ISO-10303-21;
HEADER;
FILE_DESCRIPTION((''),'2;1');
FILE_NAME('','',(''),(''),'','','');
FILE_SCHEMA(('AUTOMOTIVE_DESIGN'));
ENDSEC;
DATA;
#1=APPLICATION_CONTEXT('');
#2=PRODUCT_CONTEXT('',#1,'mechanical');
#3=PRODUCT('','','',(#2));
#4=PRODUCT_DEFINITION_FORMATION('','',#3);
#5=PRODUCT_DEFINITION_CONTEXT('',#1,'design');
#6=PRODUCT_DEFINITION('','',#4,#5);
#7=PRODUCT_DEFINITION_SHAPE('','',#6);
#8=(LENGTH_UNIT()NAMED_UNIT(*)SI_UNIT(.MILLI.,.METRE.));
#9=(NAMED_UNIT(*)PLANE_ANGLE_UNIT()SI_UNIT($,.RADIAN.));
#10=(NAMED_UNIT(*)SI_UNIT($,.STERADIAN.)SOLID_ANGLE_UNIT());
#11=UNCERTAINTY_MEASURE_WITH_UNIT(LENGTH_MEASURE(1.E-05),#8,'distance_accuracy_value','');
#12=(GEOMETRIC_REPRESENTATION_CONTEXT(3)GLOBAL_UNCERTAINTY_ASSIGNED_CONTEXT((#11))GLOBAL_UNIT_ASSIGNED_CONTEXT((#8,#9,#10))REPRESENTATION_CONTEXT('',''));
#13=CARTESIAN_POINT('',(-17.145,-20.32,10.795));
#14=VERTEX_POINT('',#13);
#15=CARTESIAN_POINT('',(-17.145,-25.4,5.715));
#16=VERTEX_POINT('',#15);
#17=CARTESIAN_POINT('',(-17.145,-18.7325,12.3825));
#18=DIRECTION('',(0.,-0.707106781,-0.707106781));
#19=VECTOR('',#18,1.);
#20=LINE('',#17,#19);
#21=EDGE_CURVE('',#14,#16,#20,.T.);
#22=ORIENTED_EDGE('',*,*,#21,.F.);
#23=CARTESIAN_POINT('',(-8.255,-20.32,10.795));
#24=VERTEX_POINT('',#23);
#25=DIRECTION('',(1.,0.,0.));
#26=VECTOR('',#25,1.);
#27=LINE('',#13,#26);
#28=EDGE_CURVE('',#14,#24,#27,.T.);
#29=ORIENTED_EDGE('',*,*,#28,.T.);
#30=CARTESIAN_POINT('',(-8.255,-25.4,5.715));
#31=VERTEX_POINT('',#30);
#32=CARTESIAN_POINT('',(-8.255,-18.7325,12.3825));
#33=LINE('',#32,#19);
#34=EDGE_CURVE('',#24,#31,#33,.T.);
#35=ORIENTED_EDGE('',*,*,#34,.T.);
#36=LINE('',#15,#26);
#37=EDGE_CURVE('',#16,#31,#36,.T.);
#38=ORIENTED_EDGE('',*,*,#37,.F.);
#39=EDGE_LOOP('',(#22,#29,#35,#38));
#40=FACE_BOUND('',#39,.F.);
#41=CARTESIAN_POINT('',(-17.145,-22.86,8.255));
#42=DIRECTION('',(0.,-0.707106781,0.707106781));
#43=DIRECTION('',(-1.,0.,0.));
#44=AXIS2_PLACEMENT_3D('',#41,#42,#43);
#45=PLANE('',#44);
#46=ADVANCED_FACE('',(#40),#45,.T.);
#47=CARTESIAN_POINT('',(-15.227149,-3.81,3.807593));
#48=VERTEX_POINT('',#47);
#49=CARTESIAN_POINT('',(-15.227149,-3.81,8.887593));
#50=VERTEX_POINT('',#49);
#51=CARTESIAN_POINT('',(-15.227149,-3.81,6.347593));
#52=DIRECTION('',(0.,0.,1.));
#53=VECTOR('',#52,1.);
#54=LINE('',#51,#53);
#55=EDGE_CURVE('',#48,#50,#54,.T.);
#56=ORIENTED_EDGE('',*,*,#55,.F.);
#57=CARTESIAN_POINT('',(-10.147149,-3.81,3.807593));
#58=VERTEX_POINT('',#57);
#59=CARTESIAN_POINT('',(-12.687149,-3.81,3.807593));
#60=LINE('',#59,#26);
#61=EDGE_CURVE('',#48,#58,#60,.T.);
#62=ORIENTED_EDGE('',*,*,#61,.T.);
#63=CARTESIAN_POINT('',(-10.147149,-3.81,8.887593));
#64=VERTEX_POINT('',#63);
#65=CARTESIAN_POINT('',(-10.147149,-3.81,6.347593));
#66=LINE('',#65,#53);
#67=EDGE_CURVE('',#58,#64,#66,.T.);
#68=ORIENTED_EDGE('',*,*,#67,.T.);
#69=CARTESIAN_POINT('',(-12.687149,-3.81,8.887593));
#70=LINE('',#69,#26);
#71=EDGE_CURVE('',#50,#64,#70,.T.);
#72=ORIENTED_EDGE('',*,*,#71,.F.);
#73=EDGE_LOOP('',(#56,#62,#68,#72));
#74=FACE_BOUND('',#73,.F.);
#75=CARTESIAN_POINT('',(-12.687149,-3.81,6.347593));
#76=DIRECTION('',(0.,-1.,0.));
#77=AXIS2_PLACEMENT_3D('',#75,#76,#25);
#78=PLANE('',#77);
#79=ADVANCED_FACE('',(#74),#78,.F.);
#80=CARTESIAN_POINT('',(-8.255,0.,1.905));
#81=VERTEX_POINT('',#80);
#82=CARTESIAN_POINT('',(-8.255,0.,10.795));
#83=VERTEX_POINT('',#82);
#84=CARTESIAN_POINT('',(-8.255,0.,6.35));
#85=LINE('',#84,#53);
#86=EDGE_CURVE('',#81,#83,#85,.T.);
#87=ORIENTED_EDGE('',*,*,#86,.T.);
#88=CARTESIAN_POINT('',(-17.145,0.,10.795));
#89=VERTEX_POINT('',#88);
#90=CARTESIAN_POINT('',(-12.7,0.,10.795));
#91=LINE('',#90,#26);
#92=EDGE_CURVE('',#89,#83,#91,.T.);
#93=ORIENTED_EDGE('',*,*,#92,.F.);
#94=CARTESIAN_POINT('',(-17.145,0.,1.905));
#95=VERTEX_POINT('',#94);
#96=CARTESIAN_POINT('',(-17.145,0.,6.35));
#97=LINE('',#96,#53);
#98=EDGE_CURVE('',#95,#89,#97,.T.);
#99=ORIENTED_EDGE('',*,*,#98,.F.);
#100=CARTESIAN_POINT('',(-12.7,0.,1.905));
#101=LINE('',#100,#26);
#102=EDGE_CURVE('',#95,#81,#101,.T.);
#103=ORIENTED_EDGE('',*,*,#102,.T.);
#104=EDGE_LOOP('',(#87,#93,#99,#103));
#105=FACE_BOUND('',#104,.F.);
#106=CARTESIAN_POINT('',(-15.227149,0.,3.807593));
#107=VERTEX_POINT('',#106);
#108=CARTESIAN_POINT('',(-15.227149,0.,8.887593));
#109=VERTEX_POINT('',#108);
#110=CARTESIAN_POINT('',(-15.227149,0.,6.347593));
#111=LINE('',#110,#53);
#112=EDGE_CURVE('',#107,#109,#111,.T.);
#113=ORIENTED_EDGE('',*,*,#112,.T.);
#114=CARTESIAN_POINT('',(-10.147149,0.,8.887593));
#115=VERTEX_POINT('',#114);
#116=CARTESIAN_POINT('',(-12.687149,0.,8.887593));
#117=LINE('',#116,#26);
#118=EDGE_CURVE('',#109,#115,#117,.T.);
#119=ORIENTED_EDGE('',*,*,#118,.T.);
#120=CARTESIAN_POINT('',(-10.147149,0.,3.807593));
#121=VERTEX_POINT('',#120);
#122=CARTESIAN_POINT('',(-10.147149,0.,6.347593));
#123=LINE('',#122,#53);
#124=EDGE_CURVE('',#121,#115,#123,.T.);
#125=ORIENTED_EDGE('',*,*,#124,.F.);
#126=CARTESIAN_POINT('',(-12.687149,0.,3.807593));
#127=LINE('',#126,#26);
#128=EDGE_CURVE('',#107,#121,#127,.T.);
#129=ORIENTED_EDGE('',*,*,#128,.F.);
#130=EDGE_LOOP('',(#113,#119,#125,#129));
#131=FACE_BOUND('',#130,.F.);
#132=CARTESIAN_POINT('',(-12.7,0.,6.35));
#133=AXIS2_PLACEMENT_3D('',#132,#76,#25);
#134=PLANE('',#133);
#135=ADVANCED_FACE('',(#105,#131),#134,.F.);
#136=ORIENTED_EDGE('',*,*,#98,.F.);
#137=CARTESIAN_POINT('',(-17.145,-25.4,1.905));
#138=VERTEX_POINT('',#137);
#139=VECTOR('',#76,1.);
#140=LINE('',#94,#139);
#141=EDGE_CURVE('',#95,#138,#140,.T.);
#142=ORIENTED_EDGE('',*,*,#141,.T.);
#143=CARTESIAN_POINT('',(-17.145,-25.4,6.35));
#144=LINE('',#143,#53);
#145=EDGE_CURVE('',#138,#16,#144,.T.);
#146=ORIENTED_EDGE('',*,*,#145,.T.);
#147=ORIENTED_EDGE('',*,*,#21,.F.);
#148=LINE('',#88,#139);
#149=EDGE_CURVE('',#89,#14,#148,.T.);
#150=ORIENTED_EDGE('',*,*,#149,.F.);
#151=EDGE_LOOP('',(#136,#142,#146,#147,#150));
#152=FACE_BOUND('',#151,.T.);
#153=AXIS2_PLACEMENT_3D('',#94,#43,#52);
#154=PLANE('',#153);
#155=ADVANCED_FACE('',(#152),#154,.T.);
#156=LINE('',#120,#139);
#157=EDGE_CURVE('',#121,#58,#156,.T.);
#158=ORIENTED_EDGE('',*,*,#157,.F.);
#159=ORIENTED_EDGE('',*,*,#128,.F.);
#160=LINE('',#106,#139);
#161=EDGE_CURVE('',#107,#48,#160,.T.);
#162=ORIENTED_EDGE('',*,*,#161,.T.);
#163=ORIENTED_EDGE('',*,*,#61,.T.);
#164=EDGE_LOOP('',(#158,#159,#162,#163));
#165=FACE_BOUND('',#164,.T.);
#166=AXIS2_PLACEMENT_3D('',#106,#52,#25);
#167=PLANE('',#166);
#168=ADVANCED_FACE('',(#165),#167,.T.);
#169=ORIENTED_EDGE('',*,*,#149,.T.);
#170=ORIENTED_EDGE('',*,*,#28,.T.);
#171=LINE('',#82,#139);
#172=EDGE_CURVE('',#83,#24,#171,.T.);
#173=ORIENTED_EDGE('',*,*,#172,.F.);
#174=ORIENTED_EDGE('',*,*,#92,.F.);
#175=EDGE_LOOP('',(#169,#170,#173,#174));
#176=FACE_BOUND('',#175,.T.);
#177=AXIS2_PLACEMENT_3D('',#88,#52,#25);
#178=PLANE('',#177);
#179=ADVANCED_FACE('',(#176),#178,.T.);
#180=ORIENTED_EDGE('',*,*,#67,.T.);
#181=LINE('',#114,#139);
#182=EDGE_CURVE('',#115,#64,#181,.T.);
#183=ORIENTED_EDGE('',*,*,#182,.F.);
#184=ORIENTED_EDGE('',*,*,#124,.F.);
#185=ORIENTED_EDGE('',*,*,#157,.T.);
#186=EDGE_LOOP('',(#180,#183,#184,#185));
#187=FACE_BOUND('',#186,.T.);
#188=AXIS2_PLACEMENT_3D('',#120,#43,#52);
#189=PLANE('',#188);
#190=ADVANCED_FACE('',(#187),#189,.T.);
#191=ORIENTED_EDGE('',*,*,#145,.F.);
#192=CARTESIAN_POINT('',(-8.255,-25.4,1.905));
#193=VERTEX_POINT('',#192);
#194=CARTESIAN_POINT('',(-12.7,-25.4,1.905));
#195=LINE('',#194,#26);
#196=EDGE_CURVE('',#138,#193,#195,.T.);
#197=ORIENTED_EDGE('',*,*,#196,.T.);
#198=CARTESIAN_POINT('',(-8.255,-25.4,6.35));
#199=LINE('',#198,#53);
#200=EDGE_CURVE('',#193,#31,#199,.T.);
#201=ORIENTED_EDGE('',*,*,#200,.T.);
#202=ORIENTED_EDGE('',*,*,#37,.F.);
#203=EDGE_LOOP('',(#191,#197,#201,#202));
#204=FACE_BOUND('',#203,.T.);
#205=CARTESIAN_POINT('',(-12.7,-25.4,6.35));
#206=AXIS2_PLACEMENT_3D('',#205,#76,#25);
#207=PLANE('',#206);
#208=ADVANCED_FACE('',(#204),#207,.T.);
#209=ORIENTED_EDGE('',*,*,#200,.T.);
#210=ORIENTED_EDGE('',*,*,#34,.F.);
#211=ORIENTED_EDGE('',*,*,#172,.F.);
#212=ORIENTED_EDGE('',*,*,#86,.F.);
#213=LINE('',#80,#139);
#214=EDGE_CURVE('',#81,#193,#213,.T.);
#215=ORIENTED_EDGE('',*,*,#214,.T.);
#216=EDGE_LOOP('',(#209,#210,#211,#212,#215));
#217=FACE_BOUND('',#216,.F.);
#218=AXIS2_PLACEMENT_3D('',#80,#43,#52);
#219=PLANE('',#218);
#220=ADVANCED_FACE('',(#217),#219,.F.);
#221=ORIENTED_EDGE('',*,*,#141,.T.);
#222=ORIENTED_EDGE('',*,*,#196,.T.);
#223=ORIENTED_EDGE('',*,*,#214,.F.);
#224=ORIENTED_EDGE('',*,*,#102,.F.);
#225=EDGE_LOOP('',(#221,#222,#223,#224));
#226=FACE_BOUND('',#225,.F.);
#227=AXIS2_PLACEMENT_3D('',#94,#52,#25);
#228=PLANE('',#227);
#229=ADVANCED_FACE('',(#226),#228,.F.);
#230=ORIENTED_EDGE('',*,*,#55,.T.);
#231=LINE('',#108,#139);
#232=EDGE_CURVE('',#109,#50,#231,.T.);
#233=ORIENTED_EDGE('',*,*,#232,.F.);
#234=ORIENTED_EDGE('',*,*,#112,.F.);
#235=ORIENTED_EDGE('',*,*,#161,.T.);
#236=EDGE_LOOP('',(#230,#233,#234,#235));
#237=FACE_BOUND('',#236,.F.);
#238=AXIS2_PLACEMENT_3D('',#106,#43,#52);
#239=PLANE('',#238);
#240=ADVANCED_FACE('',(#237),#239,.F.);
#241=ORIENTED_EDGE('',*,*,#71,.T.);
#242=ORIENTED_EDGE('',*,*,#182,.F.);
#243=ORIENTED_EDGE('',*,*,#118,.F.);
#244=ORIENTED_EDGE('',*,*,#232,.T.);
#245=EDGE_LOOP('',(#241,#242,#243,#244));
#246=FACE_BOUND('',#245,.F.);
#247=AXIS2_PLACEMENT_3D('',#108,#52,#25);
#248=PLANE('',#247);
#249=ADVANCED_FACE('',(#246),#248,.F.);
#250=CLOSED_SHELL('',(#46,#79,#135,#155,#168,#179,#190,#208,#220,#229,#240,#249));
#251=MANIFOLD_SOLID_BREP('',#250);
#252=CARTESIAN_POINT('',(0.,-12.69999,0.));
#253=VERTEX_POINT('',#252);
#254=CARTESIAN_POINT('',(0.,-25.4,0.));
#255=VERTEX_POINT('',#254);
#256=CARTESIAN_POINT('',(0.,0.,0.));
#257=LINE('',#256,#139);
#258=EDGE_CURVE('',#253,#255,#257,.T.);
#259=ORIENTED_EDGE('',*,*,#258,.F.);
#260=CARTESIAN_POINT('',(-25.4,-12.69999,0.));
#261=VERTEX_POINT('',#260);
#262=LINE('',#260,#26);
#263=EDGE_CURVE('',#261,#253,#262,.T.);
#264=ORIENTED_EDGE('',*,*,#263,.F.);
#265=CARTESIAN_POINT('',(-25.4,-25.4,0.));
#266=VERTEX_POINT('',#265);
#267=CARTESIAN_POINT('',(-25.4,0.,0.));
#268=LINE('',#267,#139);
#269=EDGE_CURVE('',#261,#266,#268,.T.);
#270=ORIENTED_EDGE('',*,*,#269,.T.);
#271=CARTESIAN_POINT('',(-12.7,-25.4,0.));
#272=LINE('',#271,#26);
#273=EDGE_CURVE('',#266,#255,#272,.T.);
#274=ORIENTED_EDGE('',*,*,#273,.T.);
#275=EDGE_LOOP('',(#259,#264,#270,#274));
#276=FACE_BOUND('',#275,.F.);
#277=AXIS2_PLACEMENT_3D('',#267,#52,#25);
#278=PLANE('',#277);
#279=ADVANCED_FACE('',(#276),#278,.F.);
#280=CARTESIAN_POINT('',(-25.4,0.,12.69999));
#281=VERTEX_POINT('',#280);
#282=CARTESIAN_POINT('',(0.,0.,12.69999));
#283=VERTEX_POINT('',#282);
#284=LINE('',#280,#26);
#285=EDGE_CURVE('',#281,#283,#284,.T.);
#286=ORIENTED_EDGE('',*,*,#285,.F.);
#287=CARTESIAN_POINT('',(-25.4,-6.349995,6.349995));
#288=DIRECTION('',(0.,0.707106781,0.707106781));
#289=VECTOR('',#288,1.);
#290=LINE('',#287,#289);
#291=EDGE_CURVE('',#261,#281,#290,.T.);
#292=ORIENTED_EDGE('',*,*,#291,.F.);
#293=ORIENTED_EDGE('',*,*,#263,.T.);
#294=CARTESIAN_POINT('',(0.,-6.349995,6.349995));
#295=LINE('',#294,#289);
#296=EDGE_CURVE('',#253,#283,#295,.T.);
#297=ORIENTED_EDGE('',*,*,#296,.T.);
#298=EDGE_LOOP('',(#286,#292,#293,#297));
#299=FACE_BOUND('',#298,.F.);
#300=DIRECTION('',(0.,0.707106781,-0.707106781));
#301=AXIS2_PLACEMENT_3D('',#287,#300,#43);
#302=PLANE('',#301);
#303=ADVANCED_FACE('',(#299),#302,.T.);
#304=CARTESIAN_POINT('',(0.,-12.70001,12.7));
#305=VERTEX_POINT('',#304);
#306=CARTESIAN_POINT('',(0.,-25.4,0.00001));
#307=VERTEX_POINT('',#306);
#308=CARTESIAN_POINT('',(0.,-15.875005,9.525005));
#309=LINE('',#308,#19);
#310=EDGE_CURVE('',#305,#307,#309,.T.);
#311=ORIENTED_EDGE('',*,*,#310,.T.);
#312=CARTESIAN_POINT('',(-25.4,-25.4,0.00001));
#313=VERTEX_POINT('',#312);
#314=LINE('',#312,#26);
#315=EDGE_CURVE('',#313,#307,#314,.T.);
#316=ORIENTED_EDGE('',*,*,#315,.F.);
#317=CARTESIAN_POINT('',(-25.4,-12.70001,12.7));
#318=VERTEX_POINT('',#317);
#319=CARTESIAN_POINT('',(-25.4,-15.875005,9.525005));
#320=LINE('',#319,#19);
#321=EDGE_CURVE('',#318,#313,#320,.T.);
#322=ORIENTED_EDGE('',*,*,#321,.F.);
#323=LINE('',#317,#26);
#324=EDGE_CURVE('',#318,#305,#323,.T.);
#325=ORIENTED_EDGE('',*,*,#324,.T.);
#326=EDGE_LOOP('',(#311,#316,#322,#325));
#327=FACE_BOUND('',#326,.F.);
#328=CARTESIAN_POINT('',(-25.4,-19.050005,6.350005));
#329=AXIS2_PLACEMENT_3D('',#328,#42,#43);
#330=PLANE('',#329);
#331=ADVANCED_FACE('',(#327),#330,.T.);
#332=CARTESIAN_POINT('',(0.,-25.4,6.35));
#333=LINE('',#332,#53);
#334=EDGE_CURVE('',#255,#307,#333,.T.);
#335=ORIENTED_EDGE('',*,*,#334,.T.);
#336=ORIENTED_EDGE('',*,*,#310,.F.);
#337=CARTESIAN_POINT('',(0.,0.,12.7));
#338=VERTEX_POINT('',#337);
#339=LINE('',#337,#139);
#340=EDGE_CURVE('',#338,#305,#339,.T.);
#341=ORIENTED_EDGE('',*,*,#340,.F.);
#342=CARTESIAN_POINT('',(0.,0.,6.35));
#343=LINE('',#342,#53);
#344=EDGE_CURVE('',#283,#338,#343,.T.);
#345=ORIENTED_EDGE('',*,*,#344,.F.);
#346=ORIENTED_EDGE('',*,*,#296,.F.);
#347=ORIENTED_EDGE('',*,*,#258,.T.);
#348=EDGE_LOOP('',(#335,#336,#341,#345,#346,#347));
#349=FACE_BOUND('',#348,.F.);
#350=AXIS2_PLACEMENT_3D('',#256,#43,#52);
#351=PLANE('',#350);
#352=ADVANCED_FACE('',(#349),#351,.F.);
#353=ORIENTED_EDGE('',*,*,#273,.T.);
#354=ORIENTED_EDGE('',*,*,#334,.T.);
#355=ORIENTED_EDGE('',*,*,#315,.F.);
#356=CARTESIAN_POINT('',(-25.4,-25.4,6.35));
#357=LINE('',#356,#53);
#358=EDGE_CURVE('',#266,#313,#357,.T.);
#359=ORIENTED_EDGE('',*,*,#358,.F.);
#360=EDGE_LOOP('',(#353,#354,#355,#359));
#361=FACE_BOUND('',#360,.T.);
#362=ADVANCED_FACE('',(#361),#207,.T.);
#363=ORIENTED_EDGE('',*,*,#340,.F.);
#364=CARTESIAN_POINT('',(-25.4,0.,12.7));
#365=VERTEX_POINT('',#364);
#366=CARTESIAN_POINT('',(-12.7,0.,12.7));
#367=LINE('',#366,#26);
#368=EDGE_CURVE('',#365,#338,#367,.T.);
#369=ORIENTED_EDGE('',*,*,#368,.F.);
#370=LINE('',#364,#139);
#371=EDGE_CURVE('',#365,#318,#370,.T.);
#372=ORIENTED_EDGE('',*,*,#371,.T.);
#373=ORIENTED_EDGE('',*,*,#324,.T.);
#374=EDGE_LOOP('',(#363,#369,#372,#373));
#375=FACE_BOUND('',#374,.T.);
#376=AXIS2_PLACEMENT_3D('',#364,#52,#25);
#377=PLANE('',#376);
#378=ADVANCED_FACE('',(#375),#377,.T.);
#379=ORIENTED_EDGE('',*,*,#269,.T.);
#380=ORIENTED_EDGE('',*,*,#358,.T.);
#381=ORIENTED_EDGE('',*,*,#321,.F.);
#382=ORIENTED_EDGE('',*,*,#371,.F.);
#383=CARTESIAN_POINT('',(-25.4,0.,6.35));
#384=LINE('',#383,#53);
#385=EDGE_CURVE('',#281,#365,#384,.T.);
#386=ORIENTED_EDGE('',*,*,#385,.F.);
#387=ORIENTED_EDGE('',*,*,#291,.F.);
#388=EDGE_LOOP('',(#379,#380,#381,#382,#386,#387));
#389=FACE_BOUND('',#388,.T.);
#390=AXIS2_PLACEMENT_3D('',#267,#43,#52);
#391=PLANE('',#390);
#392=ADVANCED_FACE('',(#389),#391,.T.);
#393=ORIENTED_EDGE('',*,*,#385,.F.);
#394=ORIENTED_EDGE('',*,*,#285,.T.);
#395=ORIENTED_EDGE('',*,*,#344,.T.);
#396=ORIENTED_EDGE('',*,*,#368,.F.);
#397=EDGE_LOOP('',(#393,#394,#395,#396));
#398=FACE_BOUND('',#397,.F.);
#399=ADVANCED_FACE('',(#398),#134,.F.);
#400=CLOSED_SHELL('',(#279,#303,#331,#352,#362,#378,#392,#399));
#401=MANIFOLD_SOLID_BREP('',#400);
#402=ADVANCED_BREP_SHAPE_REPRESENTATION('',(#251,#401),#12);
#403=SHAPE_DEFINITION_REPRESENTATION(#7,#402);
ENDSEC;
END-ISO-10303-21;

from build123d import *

# Parameters (mm, degrees)
F0_W     = 25.4
F0_H     = 12.7
F1_DEPTH = 25.4
F2_SIZE  = 12.69999
F3_W     = 8.89
F3_H     = 8.89
F4_DEPTH = 25.4
F5_W     = 5.08
F5_H     = 5.08
F6_DEPTH = 3.81
F7_SIZE  = 5.08


# Not quite as in the source:
# - a fillet or chamfer is up to 0.001 mm smaller than in the source, because OpenCascade refuses the exact size


with BuildPart() as f1:
    # F0 (on Front) → F1 (new body)
    with BuildSketch(Plane.XZ):
        with Locations((-12.7, 6.35)):
            Rectangle(F0_W, F0_H)
    extrude(amount=F1_DEPTH)

    # F2 (size 12.7 in the source; OpenCascade refuses exactly that, so slightly less here)
    f2_edges = [f1.edges().sort_by_distance(p)[0] for p in [
        (-12.7, -25.4, 12.7),
        (-12.7, 0, 0),
    ]]
    chamfer(f2_edges, length=F2_SIZE)


with BuildPart() as f4:
    # F3 (on Front) → F4 (new body)
    with BuildSketch(Plane.XZ):
        with Locations((-12.7, 6.35)):
            Rectangle(F3_W, F3_H)
    extrude(amount=F4_DEPTH)

    # F5 (on face) → F6 (cut)
    with BuildSketch(Plane.XZ):
        with Locations((-12.6871485263, 6.3475929201)):
            Rectangle(F5_W, F5_H)
    extrude(amount=F6_DEPTH, mode=Mode.SUBTRACT)

    # F7
    f7_edges = [f4.edges().sort_by_distance(p)[0] for p in [
        (-12.7, -25.4, 10.795),
    ]]
    chamfer(f7_edges, length=F7_SIZE)


solid = Compound([f1.part, f4.part])
